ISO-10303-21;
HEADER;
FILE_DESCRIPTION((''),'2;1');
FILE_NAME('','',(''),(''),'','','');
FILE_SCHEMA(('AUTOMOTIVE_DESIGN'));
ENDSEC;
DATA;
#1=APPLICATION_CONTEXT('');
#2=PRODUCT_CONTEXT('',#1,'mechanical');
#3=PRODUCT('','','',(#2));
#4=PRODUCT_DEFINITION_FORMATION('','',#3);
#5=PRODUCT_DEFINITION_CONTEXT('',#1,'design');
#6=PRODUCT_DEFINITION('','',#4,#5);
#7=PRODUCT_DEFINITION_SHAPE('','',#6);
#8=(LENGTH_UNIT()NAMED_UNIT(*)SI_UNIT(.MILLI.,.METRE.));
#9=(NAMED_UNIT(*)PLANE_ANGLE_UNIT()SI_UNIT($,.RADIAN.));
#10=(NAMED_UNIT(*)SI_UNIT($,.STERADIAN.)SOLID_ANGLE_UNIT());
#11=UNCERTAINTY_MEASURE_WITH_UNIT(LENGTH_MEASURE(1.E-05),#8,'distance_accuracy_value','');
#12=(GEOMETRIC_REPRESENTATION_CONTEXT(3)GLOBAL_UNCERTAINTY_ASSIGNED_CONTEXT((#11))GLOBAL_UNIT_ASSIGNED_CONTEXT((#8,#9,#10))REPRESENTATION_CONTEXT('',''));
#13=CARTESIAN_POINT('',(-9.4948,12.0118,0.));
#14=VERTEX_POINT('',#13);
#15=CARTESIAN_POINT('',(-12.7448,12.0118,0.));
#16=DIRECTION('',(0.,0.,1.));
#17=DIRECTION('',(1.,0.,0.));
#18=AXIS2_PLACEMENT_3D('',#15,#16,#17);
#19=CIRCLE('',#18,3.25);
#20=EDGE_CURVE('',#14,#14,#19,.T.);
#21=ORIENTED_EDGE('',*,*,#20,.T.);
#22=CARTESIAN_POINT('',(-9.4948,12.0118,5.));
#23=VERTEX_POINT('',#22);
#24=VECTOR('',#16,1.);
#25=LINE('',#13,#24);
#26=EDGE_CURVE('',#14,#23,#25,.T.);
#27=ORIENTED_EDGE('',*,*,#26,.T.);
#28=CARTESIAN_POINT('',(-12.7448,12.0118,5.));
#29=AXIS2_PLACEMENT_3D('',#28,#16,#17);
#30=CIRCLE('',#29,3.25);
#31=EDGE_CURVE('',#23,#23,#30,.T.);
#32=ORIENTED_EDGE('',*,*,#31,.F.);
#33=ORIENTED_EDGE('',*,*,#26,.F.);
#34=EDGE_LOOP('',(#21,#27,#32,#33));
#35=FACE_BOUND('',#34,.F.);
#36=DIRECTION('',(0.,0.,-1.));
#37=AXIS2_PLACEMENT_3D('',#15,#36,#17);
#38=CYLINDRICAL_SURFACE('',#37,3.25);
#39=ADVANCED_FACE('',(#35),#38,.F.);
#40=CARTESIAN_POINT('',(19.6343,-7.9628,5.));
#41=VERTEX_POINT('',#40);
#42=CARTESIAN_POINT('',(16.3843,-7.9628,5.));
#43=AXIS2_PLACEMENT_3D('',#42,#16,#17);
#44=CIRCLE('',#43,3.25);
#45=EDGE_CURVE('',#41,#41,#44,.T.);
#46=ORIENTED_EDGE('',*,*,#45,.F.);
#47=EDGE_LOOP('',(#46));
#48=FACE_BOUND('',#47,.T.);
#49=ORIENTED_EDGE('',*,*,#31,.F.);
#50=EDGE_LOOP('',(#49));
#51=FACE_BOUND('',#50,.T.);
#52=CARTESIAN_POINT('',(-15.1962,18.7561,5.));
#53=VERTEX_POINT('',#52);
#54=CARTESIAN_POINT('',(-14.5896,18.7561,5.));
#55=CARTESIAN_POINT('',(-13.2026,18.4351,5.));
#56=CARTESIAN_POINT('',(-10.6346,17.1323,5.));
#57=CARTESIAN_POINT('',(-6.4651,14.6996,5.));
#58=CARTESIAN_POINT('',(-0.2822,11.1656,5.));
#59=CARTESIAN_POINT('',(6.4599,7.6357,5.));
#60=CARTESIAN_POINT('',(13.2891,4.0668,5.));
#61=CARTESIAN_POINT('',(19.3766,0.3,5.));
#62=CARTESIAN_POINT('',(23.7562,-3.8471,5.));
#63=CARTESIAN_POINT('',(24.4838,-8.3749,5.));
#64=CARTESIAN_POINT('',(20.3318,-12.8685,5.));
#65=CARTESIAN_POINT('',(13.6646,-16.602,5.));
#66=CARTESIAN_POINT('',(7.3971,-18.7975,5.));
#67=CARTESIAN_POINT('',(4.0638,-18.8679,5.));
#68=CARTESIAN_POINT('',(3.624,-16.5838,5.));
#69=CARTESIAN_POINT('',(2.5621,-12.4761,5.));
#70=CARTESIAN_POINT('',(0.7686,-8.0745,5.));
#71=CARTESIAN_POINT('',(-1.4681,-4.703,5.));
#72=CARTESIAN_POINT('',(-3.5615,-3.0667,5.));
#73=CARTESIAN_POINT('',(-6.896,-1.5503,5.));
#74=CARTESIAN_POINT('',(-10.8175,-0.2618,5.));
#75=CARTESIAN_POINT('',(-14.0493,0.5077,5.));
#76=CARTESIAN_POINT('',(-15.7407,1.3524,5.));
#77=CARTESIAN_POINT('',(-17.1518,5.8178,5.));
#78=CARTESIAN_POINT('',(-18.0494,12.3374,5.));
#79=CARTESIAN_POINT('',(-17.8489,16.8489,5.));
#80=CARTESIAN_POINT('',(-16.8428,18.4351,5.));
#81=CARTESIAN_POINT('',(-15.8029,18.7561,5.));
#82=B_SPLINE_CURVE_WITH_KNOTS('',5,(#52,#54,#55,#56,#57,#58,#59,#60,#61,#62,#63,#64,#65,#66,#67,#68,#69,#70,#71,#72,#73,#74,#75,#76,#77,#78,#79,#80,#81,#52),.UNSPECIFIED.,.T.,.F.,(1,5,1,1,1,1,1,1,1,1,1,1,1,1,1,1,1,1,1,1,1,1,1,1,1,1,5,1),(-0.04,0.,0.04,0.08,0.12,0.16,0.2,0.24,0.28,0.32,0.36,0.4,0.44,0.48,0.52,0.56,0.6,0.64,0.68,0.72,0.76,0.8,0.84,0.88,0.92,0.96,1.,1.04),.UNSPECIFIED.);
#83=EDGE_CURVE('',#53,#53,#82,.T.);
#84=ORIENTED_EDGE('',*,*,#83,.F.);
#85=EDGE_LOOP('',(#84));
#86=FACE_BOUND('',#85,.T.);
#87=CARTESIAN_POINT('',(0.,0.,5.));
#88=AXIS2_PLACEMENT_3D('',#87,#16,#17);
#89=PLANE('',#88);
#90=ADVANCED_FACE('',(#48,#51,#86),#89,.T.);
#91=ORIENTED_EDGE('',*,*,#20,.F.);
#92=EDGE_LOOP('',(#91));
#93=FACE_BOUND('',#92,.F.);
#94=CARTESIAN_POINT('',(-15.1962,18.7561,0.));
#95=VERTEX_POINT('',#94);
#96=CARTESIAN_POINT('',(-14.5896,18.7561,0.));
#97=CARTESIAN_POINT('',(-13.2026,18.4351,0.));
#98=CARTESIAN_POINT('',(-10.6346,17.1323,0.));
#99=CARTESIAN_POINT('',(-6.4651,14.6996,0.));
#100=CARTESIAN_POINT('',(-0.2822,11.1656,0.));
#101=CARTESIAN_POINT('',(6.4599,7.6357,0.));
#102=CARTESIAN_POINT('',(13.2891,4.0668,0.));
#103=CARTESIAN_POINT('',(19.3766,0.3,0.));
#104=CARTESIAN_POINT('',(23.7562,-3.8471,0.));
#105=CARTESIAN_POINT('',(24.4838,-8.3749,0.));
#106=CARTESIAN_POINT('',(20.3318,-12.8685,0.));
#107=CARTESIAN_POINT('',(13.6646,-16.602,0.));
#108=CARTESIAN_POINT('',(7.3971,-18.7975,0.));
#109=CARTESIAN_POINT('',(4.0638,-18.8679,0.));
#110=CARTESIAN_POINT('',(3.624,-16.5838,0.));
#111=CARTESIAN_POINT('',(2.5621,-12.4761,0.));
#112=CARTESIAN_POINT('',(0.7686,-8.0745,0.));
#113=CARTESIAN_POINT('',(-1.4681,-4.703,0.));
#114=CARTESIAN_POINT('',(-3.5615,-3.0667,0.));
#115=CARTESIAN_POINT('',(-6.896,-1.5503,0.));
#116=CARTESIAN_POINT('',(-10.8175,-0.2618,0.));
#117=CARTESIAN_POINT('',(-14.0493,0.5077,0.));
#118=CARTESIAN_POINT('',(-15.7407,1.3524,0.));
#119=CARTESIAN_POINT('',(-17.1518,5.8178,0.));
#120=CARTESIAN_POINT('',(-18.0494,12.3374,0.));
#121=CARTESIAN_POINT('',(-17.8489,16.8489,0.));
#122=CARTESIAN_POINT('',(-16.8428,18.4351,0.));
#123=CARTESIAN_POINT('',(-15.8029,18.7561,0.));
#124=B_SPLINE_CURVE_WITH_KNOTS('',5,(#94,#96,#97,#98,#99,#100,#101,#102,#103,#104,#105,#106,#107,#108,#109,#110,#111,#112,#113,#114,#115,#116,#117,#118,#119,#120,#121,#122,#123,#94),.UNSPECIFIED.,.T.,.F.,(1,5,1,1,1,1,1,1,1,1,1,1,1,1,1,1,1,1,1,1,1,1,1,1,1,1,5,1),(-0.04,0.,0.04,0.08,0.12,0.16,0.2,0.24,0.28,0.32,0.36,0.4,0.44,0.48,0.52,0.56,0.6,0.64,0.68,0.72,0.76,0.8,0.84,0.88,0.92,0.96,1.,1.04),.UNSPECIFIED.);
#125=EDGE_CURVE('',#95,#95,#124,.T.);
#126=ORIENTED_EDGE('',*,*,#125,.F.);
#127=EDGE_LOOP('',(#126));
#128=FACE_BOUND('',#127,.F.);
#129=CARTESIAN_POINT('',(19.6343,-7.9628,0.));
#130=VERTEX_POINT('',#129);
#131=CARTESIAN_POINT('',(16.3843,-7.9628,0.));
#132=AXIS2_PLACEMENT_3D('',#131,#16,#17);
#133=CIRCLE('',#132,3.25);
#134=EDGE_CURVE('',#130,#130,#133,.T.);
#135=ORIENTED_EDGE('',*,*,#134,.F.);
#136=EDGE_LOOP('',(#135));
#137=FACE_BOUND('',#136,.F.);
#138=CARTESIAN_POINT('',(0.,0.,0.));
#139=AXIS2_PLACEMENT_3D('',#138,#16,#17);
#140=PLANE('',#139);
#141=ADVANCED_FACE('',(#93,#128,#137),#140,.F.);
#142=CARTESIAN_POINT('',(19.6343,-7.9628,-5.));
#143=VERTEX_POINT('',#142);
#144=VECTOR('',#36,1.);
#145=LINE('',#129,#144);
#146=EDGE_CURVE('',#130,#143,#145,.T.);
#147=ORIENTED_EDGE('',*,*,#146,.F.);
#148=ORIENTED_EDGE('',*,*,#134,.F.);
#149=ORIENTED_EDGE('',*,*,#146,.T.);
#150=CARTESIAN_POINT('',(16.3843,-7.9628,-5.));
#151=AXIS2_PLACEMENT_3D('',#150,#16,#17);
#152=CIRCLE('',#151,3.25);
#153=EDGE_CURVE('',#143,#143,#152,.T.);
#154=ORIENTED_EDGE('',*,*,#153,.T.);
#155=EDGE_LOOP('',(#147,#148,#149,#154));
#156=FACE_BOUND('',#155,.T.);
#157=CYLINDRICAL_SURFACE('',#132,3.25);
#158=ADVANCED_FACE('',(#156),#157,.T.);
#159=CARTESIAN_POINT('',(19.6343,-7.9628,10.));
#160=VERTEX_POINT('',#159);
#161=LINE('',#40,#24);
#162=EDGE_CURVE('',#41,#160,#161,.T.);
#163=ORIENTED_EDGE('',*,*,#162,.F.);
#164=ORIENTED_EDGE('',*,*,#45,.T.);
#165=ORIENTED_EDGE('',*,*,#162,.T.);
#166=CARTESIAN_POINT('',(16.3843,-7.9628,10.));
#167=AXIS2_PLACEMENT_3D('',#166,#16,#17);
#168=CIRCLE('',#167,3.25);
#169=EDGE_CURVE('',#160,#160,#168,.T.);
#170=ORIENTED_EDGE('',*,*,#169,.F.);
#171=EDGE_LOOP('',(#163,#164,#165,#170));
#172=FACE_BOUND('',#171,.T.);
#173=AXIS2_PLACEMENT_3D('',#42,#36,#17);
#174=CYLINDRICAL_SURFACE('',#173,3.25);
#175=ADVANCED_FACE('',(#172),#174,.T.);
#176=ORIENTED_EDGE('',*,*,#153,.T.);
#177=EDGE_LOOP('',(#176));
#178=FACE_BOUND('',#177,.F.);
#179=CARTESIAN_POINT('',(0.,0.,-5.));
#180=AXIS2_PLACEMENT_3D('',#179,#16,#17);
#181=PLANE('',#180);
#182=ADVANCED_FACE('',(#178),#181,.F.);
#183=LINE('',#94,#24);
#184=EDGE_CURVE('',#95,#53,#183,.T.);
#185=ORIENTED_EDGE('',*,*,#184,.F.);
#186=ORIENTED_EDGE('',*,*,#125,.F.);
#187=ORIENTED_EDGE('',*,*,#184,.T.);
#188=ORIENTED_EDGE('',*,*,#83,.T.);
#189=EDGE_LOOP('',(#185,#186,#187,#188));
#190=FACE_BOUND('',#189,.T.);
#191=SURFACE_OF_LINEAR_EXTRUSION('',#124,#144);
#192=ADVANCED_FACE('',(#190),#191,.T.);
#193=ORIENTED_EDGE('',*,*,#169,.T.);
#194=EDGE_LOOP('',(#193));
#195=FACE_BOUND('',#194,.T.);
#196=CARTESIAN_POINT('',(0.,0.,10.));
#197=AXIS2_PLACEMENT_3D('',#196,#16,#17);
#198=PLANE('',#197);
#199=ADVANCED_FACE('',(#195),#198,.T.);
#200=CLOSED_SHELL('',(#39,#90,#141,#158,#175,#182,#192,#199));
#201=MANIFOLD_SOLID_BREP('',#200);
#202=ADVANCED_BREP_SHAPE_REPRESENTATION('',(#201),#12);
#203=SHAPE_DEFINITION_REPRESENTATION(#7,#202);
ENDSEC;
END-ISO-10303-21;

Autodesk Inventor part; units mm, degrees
ref_plane "YZ Plane" through (0, 0, 0) normal (1, 0, 0) x (0, 1, 0)
ref_plane "XZ Plane" through (0, 0, 0) normal (0, 1, 0) x (-1, 0, 0)
ref_plane "XY Plane" through (0, 0, 0) normal (0, 0, 1) x (1, 0, 0)
sketch "Sketch2" plane through (0, 0, 0) normal (0, 0, 1) x (1, 0, 0)
  circle A0 centre (16.3843, -7.9628) radius 3.25
  circle A1 centre (-12.7448, 12.0118) radius 3.25
  spline S0 degree 5 poles (-15.1962, 18.7561) (-14.5896, 18.7561) (-13.2026, 18.4351) (-10.6346, 17.1323) (-6.4651, 14.6996) (-0.2822, 11.1656) (6.4599, 7.6357) (13.2891, 4.0668) (19.3766, 0.3) (23.7562, -3.8471) (24.4838, -8.3749) (20.3318, -12.8685) (13.6646, -16.602) (7.3971, -18.7975) (4.0638, -18.8679) (3.624, -16.5838) (2.5621, -12.4761) (0.7686, -8.0745) (-1.4681, -4.703) (-3.5615, -3.0667) (-6.896, -1.5503) (-10.8175, -0.2618) (-14.0493, 0.5077) (-15.7407, 1.3524) (-17.1518, 5.8178) (-18.0494, 12.3374) (-17.8489, 16.8489) (-16.8428, 18.4351) (-15.8029, 18.7561) (-15.1962, 18.7561) knots 0 0 0 0 0 0 0.04 0.08 0.12 0.16 0.2 0.24 0.28 0.32 0.36 0.4 0.44 0.48 0.52 0.56 0.6 0.64 0.68 0.72 0.76 0.8 0.84 0.88 0.92 0.96 1 1 1 1 1 1 weights 1 1 1 1 1 1 1 1 1 1 1 1 1 1 1 1 1 1 1 1 1 1 1 1 1 1 1 1 1 1
  point P0 (0, 0)
  dimension "d6" = 6.5
extrude "Extrusion1" add sketch "Sketch2" along normal blind 5 contours A0 | S0
extrude "Extrusion2" add sketch "Sketch2" against normal blind 5 contours A0
sketch "Sketch3" plane through (0, 0, 5) normal (0, 0, 1) x (1, 0, 0)
  circle A0 centre (16.3843, -7.9628) radius 3.25 projected
  circle A1 centre (-12.7448, 12.0118) radius 3.25 projected
  point P0 (0, 0)
extrude "Extrusion3" add sketch "Sketch3" along normal blind 5 contours A0
equation "\"d6\" = R"
equation "\"d0\" = thickness"
equation "\"d2\" = thickness"
equation "\"d4\" = thickness"
equation "\"R\" = 6.5"
equation "\"thickness\" = 5"
equation "\"width\" = 6.5"
equation "\"R1\" = 9"
